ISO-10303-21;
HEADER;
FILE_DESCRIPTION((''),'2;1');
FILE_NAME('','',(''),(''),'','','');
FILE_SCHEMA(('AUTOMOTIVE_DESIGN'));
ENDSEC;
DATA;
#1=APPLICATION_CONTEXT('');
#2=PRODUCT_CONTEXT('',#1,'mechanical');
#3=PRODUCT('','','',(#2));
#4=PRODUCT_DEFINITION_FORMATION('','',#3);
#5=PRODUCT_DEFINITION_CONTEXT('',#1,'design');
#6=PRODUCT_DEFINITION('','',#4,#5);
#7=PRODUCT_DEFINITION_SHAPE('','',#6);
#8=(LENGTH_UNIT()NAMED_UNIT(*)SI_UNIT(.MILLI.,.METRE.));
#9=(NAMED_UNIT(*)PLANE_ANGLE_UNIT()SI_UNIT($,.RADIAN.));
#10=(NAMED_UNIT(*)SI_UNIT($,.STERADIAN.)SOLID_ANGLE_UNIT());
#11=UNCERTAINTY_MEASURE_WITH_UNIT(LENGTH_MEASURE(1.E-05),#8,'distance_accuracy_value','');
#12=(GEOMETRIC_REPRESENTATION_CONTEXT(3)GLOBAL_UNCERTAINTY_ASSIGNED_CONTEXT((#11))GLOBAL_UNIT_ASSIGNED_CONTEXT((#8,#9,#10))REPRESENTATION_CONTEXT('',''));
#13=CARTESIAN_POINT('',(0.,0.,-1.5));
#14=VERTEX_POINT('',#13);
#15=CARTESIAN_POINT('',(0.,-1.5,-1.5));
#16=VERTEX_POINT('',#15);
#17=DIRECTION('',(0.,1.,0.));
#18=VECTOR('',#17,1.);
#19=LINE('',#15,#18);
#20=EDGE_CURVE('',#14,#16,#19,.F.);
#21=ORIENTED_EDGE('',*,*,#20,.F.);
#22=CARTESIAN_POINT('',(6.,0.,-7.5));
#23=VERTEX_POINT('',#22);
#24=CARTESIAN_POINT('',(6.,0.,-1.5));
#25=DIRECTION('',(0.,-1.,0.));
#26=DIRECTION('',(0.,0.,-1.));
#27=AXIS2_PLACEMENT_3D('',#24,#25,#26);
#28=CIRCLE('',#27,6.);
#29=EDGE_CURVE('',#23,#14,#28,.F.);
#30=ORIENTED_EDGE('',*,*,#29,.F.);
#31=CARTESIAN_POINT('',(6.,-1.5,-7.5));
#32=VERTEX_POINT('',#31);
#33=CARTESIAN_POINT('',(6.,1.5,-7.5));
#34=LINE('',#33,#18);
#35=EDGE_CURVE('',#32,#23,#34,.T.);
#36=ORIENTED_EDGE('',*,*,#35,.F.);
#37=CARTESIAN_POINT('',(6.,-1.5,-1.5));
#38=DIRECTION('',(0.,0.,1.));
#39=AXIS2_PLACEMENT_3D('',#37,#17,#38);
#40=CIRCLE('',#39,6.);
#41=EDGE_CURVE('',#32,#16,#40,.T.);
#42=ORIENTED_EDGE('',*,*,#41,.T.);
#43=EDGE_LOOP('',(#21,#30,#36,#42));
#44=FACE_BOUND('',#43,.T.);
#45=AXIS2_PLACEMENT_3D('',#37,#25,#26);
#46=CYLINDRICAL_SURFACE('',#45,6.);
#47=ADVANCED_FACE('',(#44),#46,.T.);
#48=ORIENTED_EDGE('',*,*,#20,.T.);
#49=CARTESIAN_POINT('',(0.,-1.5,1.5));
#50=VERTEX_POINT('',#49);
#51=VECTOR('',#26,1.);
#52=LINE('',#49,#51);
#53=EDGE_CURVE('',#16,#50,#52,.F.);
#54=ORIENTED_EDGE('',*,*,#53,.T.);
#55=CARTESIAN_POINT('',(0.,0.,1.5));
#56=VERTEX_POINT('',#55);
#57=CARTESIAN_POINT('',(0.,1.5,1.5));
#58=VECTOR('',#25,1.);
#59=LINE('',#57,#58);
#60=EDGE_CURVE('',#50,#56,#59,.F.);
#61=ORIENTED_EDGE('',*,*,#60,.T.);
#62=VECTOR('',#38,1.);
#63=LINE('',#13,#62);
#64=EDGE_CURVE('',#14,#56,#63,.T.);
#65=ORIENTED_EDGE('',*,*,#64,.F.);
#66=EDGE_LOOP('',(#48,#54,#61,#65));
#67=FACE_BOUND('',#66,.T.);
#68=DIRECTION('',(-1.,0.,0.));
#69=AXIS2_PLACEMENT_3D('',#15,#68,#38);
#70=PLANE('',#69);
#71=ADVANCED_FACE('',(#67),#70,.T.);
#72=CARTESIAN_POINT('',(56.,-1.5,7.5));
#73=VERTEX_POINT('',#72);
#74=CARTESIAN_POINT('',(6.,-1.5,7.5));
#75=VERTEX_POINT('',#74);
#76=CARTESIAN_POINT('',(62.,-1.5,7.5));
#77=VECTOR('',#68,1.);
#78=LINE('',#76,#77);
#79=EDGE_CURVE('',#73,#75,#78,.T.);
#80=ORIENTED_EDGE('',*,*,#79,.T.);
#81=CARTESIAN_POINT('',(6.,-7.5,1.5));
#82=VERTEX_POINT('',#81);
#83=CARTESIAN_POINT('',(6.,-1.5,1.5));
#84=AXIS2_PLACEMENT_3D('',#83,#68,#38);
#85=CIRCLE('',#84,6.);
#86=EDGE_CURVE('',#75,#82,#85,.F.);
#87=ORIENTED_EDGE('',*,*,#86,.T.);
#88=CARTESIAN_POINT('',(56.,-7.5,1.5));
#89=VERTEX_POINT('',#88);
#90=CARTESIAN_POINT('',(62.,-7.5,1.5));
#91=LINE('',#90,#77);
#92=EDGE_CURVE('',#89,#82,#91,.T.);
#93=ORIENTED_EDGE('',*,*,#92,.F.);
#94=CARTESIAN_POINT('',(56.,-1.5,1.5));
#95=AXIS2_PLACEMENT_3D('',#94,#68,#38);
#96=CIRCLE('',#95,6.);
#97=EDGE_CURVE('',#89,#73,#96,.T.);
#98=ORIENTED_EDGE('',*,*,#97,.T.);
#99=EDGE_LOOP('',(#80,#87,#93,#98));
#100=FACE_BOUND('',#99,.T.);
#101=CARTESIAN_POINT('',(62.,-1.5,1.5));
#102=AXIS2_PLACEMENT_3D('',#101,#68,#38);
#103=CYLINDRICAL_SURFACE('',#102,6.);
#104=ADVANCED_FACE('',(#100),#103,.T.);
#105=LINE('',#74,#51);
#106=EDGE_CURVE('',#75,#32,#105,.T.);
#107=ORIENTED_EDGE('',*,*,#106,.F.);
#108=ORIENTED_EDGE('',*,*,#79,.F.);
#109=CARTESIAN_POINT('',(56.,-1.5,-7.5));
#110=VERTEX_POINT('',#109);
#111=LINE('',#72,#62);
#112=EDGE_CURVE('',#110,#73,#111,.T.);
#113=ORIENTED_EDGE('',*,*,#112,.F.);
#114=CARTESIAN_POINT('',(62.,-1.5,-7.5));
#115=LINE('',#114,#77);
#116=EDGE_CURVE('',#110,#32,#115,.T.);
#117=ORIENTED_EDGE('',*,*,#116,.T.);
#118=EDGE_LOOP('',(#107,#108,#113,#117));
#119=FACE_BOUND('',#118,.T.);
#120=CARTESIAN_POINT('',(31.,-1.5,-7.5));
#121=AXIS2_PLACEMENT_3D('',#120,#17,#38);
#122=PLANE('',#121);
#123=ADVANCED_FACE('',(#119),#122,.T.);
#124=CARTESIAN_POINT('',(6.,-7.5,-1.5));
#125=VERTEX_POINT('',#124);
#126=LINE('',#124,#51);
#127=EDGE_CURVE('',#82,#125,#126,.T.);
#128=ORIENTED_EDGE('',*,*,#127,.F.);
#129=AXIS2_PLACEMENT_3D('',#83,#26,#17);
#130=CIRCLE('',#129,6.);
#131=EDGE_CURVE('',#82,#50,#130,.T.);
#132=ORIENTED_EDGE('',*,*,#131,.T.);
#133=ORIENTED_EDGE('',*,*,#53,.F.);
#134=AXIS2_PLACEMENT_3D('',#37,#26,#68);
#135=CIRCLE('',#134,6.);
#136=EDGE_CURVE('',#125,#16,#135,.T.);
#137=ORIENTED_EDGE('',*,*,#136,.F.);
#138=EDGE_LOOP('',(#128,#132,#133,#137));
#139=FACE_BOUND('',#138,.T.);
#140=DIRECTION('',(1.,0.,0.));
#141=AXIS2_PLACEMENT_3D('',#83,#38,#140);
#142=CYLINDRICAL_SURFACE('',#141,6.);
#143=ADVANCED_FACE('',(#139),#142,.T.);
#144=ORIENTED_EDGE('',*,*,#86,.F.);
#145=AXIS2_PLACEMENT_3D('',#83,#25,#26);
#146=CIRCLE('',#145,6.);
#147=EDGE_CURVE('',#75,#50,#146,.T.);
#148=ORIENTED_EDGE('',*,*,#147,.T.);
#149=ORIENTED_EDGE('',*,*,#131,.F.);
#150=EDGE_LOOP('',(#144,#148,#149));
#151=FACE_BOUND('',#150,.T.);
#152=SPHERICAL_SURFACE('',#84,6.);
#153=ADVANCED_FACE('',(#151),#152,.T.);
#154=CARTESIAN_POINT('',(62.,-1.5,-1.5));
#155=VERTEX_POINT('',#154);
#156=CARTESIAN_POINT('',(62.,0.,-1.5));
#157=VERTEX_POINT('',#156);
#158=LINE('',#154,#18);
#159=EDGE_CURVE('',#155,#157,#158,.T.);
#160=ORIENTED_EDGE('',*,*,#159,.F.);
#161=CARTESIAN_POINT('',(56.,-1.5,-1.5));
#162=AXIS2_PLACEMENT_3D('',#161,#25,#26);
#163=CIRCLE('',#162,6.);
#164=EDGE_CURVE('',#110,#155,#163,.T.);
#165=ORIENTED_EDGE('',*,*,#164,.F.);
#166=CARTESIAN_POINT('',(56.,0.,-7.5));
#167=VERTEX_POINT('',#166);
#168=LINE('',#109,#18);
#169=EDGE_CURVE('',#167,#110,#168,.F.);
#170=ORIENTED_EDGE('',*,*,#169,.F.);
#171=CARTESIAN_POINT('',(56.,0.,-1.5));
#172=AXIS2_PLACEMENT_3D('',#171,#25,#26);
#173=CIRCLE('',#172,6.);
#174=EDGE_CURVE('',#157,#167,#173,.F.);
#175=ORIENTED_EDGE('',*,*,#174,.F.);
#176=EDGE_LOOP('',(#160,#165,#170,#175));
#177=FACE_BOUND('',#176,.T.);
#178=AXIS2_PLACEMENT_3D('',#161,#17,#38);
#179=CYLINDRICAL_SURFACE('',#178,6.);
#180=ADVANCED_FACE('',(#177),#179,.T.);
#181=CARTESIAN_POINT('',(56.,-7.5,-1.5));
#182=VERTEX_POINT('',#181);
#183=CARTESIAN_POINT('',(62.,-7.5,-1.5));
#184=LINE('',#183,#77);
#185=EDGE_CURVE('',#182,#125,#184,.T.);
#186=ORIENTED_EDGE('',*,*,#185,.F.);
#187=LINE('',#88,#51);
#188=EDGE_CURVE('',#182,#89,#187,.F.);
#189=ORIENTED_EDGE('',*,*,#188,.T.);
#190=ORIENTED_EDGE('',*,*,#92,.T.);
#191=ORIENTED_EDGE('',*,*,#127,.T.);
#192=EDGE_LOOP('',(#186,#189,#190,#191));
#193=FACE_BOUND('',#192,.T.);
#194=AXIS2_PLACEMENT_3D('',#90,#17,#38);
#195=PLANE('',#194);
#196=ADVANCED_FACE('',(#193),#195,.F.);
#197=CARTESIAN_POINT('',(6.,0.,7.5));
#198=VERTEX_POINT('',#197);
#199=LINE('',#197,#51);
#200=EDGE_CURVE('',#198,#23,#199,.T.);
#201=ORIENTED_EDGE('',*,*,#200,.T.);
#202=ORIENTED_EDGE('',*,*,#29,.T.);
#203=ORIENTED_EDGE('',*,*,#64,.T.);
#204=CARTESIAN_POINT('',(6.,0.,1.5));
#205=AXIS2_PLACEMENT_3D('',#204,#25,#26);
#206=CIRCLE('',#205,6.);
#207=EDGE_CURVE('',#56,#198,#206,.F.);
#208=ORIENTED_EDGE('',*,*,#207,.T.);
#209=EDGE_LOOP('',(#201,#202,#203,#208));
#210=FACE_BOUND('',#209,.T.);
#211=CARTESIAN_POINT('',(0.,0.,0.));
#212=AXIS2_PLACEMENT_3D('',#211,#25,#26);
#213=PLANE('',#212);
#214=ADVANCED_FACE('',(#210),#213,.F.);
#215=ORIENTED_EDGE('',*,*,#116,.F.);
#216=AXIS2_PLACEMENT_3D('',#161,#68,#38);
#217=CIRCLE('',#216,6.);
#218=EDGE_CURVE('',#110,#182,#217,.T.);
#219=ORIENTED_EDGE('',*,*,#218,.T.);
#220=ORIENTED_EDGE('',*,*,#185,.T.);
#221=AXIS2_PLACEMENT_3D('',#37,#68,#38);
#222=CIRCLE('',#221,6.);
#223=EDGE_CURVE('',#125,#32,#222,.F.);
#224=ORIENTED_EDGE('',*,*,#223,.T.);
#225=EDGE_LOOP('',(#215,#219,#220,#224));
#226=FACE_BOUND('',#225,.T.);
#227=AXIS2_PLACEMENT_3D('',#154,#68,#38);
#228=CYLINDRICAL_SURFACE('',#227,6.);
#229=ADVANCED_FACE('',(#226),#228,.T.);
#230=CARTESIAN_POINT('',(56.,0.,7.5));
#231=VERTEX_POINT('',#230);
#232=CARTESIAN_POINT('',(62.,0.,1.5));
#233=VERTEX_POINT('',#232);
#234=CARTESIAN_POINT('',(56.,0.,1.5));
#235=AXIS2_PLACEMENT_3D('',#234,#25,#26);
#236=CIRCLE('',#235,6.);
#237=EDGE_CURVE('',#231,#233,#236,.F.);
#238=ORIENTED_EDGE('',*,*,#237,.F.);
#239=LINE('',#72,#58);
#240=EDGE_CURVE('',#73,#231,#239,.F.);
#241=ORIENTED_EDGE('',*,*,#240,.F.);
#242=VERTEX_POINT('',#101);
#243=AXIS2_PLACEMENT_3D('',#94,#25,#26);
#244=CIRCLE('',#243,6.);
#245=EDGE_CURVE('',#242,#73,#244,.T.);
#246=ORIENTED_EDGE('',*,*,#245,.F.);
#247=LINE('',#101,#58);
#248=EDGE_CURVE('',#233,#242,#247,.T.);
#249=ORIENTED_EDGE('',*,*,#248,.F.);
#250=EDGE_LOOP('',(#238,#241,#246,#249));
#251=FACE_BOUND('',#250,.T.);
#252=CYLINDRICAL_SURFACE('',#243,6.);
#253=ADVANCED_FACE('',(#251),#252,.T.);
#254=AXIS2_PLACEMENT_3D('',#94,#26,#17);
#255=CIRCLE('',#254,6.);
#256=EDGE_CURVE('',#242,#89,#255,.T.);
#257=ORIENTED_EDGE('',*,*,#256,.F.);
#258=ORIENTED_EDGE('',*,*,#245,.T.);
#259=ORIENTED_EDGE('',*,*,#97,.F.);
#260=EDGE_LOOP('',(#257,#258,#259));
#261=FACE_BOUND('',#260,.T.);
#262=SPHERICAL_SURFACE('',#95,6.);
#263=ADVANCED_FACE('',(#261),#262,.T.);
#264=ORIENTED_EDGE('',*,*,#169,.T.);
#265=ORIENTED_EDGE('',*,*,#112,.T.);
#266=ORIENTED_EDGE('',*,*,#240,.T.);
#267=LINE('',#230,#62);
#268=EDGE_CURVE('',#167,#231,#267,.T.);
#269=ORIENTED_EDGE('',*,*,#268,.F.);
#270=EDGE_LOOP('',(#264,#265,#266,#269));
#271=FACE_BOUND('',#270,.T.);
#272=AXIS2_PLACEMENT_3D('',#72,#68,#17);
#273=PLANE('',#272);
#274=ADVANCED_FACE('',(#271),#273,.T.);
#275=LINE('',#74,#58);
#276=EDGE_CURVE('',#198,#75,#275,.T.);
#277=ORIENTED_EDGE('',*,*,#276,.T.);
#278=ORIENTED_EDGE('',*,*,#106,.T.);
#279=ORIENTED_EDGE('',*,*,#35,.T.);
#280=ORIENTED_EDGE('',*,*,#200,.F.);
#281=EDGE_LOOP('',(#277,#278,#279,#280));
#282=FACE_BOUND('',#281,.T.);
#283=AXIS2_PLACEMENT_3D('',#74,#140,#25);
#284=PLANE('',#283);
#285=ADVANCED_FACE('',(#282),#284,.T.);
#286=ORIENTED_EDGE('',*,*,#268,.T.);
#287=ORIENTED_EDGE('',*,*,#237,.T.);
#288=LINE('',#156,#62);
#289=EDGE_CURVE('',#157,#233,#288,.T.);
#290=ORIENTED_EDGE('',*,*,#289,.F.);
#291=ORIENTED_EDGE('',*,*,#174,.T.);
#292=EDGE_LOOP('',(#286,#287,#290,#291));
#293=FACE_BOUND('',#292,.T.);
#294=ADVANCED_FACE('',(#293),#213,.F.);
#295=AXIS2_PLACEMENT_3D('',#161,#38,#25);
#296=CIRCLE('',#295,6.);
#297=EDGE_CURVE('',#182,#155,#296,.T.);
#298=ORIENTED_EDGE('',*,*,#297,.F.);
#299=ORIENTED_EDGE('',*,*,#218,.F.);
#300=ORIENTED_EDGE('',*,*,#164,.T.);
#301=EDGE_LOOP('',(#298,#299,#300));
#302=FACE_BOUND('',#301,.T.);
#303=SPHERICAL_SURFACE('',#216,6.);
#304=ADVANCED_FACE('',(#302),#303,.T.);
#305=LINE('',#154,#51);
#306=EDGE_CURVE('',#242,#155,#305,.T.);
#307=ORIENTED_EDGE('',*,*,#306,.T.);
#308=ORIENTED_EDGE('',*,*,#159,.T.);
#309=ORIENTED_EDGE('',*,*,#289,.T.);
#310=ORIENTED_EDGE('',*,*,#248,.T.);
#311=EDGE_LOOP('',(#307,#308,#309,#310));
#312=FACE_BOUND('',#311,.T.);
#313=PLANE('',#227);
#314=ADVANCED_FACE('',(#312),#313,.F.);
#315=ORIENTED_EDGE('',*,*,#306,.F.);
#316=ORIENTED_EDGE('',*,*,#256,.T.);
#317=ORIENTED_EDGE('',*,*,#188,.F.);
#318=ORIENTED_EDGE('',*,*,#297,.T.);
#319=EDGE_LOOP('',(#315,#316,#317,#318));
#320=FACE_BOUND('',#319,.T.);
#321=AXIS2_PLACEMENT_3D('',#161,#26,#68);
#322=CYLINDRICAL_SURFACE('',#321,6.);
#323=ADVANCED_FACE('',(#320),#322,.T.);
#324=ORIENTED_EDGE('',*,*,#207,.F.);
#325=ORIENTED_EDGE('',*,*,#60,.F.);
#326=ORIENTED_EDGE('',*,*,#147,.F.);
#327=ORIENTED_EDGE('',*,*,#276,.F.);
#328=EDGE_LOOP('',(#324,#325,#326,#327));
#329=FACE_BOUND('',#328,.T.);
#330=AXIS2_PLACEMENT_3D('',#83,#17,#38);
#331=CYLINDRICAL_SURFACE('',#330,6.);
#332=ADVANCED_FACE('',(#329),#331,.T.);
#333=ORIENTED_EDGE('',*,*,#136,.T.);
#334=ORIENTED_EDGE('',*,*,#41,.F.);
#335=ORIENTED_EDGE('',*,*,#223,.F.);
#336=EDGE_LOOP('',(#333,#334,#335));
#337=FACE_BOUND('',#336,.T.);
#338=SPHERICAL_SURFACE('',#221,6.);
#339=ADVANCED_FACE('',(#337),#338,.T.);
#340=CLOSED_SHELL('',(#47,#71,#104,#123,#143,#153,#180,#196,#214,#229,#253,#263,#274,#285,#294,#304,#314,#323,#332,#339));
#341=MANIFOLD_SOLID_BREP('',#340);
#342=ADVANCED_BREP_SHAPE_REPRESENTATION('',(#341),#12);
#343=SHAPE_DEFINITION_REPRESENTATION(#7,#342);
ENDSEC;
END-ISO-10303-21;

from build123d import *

# Parameters (mm, degrees)
BOSS_EXTRUDE1_DEPTH = 62
FILLET1_R           = 6
FILLET2_R           = 6
CAVITY1_START       = -1.5
CAVITY1_OUTLINE_W   = 50
CAVITY1_OUTLINE_H   = 15
CAVITY1_DEPTH       = 3
SKETCH2_W           = 132.712401986
SKETCH2_H           = 25.545070458
CUT_EXTRUDE1_DEPTH  = 10


# Read off the part's stored shape, not the designer's step: Cavity1
with BuildPart() as part:
    # Sketch1 → Boss-Extrude1 (new body)
    with BuildSketch(Plane(origin=(0, 0, 0), x_dir=(0, 0, -1), z_dir=(1, 0, 0))):
        with BuildLine():
            Line((-1.5, -7.5), (1.5, -7.5))
            ThreePointArc((1.5, -7.5), (5.742640687, -5.742640687), (7.5, -1.5))
            Line((7.5, -1.5), (7.5, 1.5))
            ThreePointArc((7.5, 1.5), (5.742640687, 5.742640687), (1.5, 7.5))
            Line((1.5, 7.5), (-1.5, 7.5))
            ThreePointArc((-1.5, 7.5), (-5.742640687, 5.742640687), (-7.5, 1.5))
            Line((-7.5, 1.5), (-7.5, -1.5))
            ThreePointArc((-7.5, -1.5), (-5.742640687, -5.742640687), (-1.5, -7.5))
        make_face()
    extrude(amount=BOSS_EXTRUDE1_DEPTH)

    # Fillet1
    fillet1_edges = [part.edges().sort_by_distance(p)[0] for p in [
        (0, 7.5, 0),
        (0, 5.742640687, -5.742640687),
        (0, 0, -7.5),
        (0, -5.742640687, -5.742640687),
        (0, -7.5, 0),
        (0, -5.742640687, 5.742640687),
        (0, 0, 7.5),
        (0, 5.742640687, 5.742640687),
    ]]
    fillet(fillet1_edges, radius=FILLET1_R)

    # Fillet2
    fillet2_edges = [part.edges().sort_by_distance(p)[0] for p in [
        (62, 5.742640687, -5.742640687),
        (62, 7.5, 0),
        (62, 5.742640687, 5.742640687),
        (62, 0, 7.5),
        (62, -5.742640687, 5.742640687),
        (62, -7.5, 0),
        (62, -5.742640687, -5.742640687),
        (62, 0, -7.5),
    ]]
    fillet(fillet2_edges, radius=FILLET2_R)

    # Cavity1 outline → Cavity1 (cut)
    with BuildSketch(Plane(origin=(0, 0, 0), x_dir=(1, 0, 0), z_dir=(0, 1, 0)).offset(CAVITY1_START)):
        with Locations((31, 0)):
            Rectangle(CAVITY1_OUTLINE_W, CAVITY1_OUTLINE_H)
    extrude(amount=CAVITY1_DEPTH, mode=Mode.SUBTRACT)

    # Sketch2 → Cut-Extrude1 (cut)
    with BuildSketch(Plane(origin=(0, 0, 0), x_dir=(1, 0, 0), z_dir=(0, 1, 0))):
        Rectangle(SKETCH2_W, SKETCH2_H)
    extrude(amount=CUT_EXTRUDE1_DEPTH, mode=Mode.SUBTRACT)


solid = part.part
